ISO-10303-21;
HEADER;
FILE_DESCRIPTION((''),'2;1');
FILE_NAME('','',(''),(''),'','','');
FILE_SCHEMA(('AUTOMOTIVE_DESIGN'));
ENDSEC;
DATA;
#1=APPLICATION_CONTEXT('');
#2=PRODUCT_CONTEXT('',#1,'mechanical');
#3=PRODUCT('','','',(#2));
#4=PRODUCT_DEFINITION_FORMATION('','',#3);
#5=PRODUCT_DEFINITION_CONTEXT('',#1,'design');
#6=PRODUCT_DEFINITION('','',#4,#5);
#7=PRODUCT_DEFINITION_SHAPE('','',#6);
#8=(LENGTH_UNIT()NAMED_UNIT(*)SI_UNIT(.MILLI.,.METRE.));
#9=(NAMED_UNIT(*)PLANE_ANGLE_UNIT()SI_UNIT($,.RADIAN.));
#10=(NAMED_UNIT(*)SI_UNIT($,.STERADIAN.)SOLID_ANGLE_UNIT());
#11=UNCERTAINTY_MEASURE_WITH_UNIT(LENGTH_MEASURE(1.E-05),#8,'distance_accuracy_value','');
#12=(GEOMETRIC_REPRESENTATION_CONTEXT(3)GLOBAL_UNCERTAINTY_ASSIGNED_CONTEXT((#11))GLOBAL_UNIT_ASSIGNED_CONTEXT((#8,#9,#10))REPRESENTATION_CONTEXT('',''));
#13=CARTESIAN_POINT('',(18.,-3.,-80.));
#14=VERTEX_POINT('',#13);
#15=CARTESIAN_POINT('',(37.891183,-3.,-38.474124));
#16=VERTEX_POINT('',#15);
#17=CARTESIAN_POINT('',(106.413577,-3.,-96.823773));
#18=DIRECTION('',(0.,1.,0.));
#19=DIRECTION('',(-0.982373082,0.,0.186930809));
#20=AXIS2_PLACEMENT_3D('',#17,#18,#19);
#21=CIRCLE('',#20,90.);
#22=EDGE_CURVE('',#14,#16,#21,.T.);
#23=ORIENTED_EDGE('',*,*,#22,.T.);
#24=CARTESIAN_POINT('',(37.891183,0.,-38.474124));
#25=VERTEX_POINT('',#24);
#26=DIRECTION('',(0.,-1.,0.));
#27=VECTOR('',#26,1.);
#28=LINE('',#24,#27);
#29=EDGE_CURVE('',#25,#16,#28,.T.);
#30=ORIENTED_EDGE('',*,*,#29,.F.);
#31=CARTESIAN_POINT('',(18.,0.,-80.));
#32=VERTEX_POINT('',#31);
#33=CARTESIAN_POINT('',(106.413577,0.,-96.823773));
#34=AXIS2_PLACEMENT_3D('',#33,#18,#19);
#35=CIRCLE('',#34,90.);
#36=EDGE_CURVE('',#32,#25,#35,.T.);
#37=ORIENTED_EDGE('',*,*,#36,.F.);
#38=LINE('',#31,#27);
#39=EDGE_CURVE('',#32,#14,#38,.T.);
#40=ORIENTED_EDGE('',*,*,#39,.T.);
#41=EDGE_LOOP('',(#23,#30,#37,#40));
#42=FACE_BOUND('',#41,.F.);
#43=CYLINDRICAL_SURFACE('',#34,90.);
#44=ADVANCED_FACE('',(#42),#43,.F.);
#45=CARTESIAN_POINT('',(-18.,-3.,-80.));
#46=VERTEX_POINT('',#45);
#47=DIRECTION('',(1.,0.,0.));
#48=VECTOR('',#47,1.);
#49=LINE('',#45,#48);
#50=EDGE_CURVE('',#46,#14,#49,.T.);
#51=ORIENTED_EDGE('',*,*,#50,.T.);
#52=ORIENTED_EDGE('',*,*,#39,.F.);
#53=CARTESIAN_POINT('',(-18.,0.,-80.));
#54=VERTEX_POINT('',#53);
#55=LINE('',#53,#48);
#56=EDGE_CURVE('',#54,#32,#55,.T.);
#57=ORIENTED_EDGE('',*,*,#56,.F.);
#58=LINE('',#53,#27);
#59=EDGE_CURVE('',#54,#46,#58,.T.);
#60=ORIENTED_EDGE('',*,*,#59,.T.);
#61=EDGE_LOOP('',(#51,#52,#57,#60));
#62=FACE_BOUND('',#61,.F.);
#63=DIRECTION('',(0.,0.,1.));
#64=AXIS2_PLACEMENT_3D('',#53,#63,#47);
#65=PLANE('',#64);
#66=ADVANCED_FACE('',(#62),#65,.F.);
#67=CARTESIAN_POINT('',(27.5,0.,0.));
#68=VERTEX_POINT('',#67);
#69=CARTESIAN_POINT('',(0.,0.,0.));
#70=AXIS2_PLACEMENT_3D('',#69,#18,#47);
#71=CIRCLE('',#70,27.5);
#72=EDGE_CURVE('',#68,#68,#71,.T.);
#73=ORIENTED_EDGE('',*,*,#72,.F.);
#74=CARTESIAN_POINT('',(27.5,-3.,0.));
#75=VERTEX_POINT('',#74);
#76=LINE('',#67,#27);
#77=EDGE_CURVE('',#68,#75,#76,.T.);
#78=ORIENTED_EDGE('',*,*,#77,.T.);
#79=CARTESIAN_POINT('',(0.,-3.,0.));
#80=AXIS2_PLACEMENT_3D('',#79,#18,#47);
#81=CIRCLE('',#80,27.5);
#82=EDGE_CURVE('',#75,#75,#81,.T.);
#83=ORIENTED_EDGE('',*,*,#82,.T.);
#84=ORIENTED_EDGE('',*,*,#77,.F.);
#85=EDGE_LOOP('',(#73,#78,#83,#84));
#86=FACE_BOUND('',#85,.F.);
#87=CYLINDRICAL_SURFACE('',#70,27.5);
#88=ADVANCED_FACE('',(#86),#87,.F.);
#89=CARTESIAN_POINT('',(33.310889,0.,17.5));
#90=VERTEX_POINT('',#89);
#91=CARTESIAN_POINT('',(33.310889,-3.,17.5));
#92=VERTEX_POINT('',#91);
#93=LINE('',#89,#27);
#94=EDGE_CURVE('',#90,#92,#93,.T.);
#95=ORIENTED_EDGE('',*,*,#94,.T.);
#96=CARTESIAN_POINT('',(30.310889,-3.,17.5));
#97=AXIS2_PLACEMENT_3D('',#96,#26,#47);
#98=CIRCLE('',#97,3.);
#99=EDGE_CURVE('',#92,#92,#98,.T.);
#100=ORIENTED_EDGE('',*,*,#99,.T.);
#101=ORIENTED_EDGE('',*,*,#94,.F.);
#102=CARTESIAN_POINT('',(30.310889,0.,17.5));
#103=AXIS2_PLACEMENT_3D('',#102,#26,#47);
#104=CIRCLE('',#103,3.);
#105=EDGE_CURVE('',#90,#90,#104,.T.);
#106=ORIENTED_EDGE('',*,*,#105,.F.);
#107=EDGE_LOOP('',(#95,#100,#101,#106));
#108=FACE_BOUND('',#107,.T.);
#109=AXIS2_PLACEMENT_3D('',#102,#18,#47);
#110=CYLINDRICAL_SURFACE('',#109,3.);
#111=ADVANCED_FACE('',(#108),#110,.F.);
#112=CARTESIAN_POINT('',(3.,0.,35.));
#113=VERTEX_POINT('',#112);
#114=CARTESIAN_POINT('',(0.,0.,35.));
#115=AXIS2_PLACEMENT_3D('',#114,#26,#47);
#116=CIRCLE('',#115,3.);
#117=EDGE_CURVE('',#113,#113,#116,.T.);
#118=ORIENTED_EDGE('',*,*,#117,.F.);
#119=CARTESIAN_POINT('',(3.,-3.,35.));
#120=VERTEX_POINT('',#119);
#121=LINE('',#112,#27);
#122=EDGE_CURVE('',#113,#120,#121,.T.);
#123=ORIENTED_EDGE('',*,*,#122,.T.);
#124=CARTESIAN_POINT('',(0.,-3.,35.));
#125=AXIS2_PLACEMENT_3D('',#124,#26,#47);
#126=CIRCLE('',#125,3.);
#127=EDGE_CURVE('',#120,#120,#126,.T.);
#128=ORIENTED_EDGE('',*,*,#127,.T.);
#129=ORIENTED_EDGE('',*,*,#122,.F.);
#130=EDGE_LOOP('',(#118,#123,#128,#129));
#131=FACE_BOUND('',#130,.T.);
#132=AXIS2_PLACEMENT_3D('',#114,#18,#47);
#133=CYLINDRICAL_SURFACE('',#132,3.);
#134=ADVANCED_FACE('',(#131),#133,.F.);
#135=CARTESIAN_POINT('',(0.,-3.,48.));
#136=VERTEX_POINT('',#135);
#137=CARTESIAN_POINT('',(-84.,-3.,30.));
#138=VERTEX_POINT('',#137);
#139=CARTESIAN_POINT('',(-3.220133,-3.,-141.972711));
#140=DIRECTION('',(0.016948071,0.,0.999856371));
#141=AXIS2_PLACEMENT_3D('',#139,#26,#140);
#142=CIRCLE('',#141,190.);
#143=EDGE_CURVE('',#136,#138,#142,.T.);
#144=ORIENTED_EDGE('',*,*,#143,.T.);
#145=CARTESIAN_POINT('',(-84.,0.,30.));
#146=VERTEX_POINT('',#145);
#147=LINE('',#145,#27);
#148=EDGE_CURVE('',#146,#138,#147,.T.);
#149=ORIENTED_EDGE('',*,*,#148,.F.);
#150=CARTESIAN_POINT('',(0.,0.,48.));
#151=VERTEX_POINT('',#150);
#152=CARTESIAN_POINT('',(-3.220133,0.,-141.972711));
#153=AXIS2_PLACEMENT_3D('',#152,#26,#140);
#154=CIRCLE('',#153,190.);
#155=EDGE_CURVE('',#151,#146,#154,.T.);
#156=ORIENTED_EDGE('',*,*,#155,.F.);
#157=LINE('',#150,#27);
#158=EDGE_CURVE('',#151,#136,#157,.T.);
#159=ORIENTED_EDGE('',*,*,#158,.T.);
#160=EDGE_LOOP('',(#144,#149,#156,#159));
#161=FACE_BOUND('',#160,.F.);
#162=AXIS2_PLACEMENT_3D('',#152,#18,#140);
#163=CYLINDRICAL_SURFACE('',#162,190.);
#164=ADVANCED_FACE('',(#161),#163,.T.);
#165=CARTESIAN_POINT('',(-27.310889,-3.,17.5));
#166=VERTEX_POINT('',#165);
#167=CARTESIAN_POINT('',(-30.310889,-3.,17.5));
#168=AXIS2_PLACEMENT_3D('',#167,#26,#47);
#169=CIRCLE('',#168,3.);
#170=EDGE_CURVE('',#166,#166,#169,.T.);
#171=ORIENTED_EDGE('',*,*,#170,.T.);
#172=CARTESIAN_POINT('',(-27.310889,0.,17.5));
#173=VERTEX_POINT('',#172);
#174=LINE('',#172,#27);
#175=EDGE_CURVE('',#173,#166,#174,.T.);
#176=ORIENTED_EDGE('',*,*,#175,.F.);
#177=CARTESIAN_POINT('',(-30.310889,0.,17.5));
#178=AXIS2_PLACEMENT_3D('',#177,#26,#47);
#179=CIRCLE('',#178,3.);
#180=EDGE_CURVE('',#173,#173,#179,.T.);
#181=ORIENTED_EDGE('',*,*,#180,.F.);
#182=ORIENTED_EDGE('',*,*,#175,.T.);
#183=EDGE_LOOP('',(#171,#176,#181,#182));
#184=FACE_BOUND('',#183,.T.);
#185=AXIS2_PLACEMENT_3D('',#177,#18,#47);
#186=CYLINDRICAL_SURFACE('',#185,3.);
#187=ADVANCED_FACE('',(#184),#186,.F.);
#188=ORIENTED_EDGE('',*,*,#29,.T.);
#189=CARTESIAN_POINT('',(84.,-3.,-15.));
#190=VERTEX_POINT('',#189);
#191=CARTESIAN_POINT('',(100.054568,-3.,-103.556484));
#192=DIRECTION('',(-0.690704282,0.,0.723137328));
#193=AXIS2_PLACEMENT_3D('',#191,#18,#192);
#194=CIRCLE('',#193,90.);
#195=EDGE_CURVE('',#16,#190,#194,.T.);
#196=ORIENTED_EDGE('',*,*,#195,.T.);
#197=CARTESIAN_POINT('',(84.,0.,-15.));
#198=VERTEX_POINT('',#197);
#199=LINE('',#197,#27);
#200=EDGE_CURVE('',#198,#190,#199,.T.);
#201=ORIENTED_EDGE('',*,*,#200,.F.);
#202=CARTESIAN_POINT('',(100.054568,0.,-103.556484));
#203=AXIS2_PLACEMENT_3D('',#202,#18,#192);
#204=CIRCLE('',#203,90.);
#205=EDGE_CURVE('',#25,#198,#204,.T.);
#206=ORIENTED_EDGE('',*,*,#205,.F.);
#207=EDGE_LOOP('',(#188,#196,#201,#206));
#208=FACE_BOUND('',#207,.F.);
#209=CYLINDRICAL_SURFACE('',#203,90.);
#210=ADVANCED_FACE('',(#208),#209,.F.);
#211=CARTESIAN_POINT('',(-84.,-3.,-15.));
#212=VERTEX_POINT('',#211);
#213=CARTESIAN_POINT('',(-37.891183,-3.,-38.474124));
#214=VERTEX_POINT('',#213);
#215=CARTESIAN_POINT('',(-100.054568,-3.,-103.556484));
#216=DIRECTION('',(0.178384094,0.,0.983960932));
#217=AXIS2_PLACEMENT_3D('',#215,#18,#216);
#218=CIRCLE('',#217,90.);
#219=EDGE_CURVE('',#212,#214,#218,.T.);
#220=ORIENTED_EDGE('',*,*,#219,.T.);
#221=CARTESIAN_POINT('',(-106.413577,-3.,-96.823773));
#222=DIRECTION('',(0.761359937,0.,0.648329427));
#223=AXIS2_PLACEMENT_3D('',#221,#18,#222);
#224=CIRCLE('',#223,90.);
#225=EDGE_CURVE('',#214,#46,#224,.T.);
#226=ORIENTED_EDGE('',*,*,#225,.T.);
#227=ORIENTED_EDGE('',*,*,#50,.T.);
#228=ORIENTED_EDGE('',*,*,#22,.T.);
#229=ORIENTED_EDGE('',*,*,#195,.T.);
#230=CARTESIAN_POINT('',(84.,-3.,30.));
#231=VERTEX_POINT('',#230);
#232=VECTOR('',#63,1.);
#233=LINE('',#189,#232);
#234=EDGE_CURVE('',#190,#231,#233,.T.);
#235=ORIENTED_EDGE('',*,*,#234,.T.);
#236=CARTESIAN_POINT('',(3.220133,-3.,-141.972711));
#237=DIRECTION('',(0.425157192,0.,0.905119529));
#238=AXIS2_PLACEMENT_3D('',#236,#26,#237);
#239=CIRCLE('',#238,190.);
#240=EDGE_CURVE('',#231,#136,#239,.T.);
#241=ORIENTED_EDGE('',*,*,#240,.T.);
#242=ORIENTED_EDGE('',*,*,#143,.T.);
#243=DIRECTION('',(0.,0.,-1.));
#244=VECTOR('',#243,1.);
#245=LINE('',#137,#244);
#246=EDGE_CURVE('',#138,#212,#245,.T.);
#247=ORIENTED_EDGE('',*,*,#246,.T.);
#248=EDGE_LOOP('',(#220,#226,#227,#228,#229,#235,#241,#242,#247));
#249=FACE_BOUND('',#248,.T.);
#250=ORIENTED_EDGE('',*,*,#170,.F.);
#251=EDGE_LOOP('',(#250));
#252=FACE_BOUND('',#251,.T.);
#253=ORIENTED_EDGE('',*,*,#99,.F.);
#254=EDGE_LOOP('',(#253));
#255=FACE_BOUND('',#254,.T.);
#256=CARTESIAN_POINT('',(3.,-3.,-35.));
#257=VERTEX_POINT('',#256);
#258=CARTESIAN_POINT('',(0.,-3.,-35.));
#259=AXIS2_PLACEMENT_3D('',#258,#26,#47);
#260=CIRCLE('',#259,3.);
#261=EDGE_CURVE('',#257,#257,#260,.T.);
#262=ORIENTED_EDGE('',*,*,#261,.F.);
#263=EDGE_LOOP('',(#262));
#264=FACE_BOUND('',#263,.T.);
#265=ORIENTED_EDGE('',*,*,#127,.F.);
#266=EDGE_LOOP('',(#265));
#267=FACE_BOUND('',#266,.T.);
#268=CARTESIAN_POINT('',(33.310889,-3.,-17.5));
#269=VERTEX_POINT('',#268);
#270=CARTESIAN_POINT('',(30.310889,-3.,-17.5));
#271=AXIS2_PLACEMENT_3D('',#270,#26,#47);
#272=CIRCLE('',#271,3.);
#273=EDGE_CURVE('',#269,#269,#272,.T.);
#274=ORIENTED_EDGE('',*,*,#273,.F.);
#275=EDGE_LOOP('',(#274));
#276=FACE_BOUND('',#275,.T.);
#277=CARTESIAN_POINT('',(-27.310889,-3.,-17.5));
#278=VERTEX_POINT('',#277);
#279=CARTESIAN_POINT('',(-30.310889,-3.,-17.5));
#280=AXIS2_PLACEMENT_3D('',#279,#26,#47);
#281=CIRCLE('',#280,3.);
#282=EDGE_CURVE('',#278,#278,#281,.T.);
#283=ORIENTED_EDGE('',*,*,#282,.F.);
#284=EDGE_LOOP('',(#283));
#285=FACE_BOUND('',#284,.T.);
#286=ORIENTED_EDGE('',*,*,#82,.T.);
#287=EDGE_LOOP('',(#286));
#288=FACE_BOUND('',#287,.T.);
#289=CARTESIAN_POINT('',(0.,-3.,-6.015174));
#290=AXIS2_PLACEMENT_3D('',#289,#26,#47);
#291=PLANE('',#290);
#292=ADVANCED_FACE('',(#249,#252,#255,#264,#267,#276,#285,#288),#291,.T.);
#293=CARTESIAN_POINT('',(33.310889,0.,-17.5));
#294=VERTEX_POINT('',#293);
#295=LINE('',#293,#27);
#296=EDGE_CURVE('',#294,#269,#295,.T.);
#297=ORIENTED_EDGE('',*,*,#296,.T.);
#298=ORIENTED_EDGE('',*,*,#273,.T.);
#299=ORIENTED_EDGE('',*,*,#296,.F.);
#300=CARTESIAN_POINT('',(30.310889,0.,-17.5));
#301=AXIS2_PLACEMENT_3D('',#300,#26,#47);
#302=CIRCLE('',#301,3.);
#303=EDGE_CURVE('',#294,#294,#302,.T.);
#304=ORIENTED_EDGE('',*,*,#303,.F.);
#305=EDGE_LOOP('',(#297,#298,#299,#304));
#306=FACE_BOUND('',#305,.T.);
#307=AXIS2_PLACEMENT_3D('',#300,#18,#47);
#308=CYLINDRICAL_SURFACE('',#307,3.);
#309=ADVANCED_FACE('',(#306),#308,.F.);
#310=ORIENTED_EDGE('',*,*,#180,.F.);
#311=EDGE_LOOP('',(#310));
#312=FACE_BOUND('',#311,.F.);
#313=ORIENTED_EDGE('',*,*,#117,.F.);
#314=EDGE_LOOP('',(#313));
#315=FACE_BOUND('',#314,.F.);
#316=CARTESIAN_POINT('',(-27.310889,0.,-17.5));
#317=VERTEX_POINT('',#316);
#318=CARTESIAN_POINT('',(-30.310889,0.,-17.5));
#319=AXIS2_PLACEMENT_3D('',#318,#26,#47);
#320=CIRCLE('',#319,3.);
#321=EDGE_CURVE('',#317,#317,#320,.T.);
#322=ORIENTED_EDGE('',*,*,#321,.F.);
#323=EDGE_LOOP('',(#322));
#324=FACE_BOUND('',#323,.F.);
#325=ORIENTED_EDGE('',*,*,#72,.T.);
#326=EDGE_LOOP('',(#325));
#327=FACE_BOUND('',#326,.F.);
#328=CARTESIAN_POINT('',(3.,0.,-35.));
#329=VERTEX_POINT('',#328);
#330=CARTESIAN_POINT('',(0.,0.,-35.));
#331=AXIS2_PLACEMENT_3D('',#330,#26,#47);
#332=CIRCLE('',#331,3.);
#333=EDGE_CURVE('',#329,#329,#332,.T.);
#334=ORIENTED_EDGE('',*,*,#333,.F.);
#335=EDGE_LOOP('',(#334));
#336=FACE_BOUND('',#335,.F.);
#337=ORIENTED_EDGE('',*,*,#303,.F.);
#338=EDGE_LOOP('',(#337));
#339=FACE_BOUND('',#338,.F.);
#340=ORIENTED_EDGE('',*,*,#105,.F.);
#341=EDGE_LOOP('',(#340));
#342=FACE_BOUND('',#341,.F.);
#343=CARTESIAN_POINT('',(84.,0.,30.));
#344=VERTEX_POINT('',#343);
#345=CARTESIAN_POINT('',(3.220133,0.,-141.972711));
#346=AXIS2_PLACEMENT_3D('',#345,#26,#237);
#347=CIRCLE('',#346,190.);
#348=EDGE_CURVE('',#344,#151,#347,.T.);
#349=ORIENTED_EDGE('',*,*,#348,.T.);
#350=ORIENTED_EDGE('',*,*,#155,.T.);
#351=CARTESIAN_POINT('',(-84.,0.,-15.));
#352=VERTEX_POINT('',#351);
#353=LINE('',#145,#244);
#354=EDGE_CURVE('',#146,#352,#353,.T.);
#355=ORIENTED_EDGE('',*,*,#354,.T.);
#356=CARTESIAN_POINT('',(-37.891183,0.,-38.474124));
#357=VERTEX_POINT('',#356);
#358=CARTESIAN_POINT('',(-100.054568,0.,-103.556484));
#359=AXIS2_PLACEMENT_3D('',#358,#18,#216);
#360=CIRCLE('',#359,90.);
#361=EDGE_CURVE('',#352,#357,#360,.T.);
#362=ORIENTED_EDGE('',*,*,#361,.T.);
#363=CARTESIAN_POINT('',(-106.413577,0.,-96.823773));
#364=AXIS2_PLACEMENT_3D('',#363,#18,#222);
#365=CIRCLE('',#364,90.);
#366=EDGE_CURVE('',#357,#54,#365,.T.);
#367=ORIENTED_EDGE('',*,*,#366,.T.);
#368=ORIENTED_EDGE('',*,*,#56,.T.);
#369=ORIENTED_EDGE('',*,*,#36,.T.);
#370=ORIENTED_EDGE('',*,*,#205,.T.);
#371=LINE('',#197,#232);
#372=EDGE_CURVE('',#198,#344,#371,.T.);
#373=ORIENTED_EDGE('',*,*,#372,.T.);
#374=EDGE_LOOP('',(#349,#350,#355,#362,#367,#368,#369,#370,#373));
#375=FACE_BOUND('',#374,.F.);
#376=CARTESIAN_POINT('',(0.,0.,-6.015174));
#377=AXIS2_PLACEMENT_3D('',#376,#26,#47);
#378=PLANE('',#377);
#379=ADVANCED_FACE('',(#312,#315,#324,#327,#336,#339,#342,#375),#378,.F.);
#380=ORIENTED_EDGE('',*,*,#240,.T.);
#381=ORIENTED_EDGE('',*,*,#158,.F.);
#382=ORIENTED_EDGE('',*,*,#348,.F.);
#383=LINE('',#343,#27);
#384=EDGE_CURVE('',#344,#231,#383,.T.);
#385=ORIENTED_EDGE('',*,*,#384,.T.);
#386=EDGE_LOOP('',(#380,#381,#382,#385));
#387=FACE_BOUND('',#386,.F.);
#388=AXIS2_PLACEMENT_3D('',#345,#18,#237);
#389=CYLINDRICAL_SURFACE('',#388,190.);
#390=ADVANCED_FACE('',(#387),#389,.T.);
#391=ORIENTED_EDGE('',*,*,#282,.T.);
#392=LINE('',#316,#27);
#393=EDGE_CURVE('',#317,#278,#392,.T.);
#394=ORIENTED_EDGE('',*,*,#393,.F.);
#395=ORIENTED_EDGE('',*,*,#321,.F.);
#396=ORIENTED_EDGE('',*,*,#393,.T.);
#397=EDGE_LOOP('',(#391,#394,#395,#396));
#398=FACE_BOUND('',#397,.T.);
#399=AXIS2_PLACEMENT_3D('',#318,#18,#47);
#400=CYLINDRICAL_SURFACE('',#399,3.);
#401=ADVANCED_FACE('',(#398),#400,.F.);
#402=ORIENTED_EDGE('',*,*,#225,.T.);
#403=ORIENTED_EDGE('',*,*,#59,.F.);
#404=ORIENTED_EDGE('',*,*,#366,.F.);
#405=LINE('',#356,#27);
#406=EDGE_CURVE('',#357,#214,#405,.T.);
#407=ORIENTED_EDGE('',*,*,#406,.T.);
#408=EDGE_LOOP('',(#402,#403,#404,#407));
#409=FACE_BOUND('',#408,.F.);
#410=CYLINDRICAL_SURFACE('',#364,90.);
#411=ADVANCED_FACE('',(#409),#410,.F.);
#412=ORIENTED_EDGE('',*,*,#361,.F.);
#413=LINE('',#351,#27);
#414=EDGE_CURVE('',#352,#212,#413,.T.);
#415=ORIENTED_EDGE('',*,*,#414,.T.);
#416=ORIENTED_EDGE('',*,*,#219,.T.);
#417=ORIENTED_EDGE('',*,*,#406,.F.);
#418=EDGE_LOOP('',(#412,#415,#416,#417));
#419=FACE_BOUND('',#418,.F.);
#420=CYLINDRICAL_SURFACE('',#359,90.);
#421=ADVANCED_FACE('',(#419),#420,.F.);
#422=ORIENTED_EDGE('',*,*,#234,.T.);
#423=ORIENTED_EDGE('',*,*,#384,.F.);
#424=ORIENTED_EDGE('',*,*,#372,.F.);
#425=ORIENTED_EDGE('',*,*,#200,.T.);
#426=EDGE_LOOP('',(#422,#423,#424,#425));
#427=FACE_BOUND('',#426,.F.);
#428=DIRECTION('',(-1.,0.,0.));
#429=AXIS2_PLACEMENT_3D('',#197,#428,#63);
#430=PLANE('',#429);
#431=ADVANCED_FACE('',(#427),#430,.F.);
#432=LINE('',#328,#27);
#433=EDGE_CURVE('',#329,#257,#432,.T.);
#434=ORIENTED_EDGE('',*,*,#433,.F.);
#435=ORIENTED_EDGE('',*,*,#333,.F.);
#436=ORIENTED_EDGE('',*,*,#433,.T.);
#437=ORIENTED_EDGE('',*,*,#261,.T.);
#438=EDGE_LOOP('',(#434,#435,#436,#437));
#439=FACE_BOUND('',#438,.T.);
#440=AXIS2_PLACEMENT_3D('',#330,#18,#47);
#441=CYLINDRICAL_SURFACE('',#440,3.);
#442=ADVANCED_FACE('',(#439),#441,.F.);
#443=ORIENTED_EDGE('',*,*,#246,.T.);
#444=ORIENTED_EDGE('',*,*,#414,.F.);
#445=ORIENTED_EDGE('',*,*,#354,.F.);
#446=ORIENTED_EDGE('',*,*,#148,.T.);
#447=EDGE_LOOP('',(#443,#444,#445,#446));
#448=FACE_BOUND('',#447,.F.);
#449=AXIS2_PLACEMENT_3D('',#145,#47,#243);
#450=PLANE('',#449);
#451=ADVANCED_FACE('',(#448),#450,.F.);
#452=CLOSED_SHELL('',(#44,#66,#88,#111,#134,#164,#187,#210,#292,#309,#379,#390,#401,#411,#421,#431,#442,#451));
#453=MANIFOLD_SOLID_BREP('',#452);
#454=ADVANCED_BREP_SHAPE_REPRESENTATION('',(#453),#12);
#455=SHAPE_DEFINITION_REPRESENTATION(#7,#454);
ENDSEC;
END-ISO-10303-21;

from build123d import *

# Parameters (mm, degrees)
F0_R     = 3
F1_DEPTH = 3


# Not quite as in the source:
# - a feature names something its author has since deleted; it is built from what else it names


with BuildPart() as f1:
    # F0 (on Front) → F1 (new body)
    with BuildSketch(Plane.XZ):
        with BuildLine():
            ThreePointArc((18, -80), (25.2450835608, -57.9435000854), (37.8911830779, -38.474124356))
            ThreePointArc((37.8911830779, -38.474124356), (59.2223421632, -23.3521866114), (84, -15))
            Line((84, -15), (84, 30))
            ThreePointArc((84, 30), (43.0306603199, 43.8097481595), (0, 48))
            ThreePointArc((0, 48), (-43.0306603199, 43.8097481595), (-84, 30))
            Line((-84, 30), (-84, -15))
            ThreePointArc((-84, -15), (-59.2223421632, -23.3521866114), (-37.8911830779, -38.474124356))
            ThreePointArc((-37.8911830779, -38.474124356), (-25.2450835608, -57.9435000854), (-18, -80))
            Line((-18, -80), (0, -80))
            Line((0, -80), (18, -80))
        make_face()
        with Locations((-30.3108891325, -17.5)):
            Circle(F0_R, mode=Mode.SUBTRACT)
        with Locations((0, -35)):
            Circle(F0_R, mode=Mode.SUBTRACT)
        with Locations((30.3108891325, -17.5)):
            Circle(F0_R, mode=Mode.SUBTRACT)
        with Locations((-30.3108891325, 17.5)):
            Circle(F0_R, mode=Mode.SUBTRACT)
        with BuildLine():
            ThreePointArc((19.2964358267, -19.5933040702), (-25.3663358138, 10.6206877076), (27.5, 0))
            ThreePointArc((27.5, 0), (25.3663358138, -10.6206877076), (19.2964358267, -19.5933040702))
        make_face(mode=Mode.SUBTRACT)
        with Locations((30.3108891325, 17.5)):
            Circle(F0_R, mode=Mode.SUBTRACT)
        with Locations((0, 35)):
            Circle(F0_R, mode=Mode.SUBTRACT)
    extrude(amount=F1_DEPTH)


solid = f1.part
